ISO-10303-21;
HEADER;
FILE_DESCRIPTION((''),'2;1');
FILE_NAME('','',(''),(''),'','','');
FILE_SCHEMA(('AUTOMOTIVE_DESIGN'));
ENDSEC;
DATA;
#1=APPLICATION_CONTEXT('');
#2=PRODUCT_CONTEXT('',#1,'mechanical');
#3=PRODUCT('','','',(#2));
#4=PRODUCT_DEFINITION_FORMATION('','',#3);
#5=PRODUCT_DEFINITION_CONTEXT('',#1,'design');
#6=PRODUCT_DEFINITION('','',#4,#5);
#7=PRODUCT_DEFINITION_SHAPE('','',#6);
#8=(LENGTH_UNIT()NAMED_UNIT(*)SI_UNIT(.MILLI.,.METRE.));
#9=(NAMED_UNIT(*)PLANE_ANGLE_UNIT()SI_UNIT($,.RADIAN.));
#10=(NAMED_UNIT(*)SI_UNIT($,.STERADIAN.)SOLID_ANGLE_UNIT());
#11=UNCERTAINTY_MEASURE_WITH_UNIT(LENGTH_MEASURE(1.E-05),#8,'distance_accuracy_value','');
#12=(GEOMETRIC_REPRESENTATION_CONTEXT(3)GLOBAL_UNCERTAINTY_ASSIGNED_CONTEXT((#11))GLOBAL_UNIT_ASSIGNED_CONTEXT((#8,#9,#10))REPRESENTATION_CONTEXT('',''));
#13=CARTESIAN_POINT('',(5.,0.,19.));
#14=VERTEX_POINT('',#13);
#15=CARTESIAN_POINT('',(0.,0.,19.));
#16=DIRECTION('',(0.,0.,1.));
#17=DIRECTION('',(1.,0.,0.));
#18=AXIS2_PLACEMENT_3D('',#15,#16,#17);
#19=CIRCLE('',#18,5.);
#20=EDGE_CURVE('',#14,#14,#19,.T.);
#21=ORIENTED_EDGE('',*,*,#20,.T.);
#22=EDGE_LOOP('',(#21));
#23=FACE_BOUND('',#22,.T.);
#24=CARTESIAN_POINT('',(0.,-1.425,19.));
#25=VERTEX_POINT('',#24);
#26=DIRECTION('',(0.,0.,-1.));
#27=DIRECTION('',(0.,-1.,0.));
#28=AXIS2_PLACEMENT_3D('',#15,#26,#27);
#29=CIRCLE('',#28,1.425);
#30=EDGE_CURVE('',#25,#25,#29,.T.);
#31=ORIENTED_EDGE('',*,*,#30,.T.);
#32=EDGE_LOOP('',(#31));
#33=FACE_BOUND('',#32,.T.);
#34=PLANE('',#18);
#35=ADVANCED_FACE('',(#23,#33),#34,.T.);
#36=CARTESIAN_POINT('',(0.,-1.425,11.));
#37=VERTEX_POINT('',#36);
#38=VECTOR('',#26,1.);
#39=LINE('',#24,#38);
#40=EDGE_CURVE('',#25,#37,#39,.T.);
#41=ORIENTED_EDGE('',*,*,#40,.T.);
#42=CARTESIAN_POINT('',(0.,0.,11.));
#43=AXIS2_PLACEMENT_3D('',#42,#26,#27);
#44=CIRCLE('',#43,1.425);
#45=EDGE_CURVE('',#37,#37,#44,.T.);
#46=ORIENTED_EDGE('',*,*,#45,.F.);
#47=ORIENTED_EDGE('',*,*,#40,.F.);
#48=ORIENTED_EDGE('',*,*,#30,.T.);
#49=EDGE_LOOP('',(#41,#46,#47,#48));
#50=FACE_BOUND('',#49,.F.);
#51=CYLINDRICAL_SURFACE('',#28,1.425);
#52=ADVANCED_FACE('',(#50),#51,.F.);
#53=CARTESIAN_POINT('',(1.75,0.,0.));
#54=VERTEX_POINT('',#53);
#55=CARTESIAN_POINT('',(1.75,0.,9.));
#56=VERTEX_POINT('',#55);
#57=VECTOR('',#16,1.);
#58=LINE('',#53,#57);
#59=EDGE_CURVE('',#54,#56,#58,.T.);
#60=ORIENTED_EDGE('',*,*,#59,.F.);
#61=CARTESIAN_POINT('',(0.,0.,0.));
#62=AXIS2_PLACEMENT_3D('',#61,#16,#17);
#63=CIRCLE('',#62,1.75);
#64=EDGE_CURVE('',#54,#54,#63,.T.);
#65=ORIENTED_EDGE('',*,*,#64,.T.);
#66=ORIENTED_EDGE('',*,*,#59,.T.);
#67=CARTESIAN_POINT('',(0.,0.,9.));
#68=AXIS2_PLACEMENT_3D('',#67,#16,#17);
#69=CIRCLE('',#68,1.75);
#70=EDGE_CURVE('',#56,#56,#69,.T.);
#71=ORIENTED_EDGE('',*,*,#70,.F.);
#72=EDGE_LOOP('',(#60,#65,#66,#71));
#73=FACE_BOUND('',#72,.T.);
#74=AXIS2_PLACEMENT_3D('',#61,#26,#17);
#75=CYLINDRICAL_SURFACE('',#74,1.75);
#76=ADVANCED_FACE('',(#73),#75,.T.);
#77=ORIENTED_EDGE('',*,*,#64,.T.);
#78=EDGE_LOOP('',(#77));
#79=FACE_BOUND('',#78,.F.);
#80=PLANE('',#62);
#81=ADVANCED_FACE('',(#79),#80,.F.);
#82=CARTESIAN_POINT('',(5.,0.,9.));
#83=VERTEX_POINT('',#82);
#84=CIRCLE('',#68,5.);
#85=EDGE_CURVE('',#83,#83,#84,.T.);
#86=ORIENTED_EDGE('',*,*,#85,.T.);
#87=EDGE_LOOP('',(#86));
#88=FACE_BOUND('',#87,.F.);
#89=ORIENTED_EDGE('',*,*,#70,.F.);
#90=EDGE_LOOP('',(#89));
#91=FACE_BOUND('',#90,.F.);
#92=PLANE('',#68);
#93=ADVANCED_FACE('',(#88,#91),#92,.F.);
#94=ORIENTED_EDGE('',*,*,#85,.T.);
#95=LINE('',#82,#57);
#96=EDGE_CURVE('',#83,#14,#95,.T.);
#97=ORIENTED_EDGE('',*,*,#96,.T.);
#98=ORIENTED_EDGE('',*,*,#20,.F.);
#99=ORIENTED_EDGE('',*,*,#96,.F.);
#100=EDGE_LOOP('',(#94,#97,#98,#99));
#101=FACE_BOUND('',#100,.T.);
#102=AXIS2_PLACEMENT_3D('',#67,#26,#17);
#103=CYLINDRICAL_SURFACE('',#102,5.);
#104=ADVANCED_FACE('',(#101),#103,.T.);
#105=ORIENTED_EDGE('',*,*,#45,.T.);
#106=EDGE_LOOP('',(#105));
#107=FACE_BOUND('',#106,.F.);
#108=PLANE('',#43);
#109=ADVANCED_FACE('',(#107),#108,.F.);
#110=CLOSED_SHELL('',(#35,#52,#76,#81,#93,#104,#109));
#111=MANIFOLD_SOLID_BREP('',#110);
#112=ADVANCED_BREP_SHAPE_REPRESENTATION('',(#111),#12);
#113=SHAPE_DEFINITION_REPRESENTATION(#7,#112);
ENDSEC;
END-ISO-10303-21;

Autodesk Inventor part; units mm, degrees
ref_plane "YZ Plane" through (0, 0, 0) normal (1, 0, 0) x (0, 1, 0)
ref_plane "XZ Plane" through (0, 0, 0) normal (0, 1, 0) x (-1, 0, 0)
ref_plane "XY Plane" through (0, 0, 0) normal (0, 0, 1) x (1, 0, 0)
sketch "Sketch7" plane through (0, 0, 0) normal (0, 0, 1) x (1, 0, 0)
  circle A0 centre (0, 0) radius 1.75
  dimension "d19" = 3.5
extrude "Extrusion6" add sketch "Sketch7" along normal blind 9
sketch "Sketch8" plane through (0, 0, 9) normal (0, 0, 1) x (1, 0, 0)
  circle A0 centre (0, 0) radius 5
  dimension "d22" = 10
extrude "Extrusion7" add sketch "Sketch8" along normal blind 10
sketch "Sketch9" plane through (0, 0, 19) normal (0, 0, 1) x (1, 0, 0)
  point P0 (0, 0)
  point P1 (0, 0)
hole "Hole1" at (0, 0, 19) direction (0, 0, -1) diameter 2.85 depth 8 thread size "M3.5x0.6" class "6H" standard "ANSI Metric M Profile"
properties part number "Elbow_Parallel_Rod_V1"
